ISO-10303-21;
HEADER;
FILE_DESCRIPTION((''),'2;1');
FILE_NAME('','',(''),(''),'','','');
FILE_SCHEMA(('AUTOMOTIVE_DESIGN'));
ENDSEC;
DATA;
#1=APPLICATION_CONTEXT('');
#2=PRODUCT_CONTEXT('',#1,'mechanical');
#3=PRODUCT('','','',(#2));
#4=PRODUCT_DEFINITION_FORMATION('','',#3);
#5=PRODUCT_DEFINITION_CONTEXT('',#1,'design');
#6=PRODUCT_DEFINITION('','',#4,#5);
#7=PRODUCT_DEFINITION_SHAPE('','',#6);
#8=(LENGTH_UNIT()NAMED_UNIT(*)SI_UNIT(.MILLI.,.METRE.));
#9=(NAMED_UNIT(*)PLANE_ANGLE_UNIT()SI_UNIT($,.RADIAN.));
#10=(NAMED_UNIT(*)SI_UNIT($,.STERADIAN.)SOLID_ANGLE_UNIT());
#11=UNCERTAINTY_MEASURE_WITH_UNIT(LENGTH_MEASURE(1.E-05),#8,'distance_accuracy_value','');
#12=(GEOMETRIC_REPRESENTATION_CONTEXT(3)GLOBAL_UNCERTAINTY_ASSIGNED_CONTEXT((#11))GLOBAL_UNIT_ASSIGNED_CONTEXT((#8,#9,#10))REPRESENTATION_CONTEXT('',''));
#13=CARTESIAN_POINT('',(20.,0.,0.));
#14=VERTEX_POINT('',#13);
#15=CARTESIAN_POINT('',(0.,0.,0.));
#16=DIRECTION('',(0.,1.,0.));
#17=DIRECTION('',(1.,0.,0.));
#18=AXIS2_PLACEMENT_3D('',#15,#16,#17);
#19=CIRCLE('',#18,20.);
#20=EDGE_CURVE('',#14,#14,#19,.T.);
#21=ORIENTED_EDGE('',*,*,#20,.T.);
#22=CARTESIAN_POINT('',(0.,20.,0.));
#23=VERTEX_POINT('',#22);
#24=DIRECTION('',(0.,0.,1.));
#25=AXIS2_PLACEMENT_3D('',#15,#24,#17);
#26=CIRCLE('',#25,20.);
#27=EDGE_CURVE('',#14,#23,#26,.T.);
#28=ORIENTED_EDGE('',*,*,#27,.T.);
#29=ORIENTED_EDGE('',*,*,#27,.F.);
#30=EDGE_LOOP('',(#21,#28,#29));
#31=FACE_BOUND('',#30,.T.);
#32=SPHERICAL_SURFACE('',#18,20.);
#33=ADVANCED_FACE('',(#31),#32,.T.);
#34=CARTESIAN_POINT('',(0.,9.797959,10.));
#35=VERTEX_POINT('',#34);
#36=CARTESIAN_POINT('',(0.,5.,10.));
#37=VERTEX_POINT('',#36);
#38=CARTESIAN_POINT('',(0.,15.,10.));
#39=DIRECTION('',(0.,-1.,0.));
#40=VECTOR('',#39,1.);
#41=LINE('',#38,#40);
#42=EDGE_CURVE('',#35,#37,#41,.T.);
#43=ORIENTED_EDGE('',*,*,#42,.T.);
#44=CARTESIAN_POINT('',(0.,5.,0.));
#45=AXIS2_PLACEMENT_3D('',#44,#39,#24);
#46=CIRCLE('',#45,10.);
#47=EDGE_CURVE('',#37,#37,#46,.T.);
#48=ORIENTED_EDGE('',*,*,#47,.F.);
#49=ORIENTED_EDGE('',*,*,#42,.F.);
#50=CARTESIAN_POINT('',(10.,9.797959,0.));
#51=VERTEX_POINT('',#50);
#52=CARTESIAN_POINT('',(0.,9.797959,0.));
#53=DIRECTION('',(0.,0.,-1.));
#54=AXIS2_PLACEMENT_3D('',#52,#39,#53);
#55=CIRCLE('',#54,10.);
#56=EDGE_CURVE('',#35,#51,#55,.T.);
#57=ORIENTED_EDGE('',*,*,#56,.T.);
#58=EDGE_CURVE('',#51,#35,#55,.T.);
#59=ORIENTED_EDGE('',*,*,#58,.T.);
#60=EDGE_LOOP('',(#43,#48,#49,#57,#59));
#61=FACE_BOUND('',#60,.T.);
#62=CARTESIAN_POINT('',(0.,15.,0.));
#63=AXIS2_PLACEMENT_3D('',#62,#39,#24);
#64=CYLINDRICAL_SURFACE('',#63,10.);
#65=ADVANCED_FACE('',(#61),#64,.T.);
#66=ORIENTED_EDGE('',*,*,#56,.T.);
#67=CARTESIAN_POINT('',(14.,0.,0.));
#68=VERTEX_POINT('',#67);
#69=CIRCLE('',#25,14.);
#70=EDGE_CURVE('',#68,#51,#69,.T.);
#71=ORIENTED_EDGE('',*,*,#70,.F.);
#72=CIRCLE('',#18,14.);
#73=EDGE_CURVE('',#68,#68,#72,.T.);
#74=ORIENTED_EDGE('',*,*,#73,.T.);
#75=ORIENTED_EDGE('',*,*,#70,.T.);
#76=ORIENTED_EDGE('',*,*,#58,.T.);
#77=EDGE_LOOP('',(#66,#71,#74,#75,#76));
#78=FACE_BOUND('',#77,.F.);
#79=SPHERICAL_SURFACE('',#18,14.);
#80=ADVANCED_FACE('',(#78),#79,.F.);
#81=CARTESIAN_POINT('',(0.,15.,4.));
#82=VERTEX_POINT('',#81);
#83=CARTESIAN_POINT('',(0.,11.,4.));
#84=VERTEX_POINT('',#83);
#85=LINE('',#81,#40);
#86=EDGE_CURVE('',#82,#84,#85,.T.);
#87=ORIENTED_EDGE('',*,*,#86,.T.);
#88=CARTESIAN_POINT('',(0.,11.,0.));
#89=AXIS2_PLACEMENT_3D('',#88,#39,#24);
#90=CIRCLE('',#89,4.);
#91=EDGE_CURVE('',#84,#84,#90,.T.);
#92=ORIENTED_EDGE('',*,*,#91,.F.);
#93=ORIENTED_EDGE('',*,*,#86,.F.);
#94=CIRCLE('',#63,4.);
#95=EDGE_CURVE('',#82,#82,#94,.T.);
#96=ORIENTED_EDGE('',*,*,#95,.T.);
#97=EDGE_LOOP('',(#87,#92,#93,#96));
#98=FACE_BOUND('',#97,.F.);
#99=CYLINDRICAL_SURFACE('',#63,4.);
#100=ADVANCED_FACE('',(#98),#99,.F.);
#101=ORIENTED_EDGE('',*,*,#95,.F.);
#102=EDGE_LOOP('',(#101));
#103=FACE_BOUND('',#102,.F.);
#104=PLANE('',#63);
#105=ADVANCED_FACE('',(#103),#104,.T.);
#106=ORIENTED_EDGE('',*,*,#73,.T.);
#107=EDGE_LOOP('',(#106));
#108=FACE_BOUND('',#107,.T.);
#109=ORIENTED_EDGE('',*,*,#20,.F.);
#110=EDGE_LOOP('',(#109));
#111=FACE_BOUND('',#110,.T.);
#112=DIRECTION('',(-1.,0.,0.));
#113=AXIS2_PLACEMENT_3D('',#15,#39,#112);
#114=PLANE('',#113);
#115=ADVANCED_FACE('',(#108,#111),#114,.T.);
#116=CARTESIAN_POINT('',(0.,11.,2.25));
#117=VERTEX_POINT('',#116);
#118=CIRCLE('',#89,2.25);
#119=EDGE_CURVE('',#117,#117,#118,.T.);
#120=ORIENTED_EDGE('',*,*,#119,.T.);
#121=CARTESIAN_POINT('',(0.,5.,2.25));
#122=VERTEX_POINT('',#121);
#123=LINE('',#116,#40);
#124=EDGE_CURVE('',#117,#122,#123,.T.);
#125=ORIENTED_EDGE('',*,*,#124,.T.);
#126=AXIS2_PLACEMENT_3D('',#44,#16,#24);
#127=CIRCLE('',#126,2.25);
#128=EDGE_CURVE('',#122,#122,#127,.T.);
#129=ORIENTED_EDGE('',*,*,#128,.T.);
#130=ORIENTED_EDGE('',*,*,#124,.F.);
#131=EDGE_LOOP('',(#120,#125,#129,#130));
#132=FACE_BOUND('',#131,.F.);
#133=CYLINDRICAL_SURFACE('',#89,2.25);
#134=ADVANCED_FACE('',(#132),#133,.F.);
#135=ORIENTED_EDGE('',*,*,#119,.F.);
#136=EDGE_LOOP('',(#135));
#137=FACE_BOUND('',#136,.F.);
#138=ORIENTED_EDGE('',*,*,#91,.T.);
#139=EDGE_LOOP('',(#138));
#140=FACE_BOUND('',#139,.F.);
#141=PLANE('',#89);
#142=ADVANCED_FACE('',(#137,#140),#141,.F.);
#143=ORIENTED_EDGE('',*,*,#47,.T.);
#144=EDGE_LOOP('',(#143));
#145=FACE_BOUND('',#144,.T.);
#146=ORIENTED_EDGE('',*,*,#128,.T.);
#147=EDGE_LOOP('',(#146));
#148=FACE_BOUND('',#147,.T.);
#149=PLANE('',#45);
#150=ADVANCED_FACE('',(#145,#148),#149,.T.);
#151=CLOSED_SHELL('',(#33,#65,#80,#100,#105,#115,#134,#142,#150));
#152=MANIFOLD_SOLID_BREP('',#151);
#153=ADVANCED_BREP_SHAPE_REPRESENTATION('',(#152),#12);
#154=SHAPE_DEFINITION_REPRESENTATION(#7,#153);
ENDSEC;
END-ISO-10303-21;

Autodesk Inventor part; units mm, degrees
ref_plane "YZ Plane" through (0, 0, 0) normal (1, 0, 0) x (0, 1, 0)
ref_plane "XY Plane" through (0, 0, 0) normal (0, 0, 1) x (1, 0, 0)
sketch "Sketch1" plane through (0, 0, 0) normal (0, 0, 1) x (1, 0, 0)
  line L0 (0, 0) -> (0, 20)
  line L1 (0, 0) -> (20, 0)
  arc A0 (20, 0) -> (0, 20) centre (0, 0) ccw
  line L2 (0, -4.8284) -> (0, 28.9706) projected
  dimension "d2" = 20
revolve "Revolution1" add sketch "Sketch1" angle 360 about axis through (0, -10, 0) along (0, 1, 0)
ref_plane "Work Plane1" through (0, 15, 0) normal (0, 1, 0) x (-1, 0, 0)
sketch "Sketch2" plane through (0, 15, 0) normal (0, 1, 0) x (-1, 0, 0)
  point P0 (0, 0)
  point P1 (0, 0)
hole "Hole1" at (0, 15, 0) direction (0, -1, 0) diameter 4.5 end through all counterbore diameter 8 counterbore depth 4 clearance for "Socket Head Cap Screw" size "M4" standard "Ansi Metric M Profile"
shell "Shell1" thickness 6 removed faces 1 at (13.8841, 0, 1.6858)
sketch "Sketch3" plane through (0, 0, 0) normal (0, -1, 0) x (1, 0, 0)
  circle A0 centre (0, 0) radius 8.25 projected
  circle A1 centre (0, 0) radius 2.25 projected
extrude "Extrusion1" cut sketch "Sketch3" against normal blind 5
properties part number "Ball_Upper Half" material "Nylon 6/6"
